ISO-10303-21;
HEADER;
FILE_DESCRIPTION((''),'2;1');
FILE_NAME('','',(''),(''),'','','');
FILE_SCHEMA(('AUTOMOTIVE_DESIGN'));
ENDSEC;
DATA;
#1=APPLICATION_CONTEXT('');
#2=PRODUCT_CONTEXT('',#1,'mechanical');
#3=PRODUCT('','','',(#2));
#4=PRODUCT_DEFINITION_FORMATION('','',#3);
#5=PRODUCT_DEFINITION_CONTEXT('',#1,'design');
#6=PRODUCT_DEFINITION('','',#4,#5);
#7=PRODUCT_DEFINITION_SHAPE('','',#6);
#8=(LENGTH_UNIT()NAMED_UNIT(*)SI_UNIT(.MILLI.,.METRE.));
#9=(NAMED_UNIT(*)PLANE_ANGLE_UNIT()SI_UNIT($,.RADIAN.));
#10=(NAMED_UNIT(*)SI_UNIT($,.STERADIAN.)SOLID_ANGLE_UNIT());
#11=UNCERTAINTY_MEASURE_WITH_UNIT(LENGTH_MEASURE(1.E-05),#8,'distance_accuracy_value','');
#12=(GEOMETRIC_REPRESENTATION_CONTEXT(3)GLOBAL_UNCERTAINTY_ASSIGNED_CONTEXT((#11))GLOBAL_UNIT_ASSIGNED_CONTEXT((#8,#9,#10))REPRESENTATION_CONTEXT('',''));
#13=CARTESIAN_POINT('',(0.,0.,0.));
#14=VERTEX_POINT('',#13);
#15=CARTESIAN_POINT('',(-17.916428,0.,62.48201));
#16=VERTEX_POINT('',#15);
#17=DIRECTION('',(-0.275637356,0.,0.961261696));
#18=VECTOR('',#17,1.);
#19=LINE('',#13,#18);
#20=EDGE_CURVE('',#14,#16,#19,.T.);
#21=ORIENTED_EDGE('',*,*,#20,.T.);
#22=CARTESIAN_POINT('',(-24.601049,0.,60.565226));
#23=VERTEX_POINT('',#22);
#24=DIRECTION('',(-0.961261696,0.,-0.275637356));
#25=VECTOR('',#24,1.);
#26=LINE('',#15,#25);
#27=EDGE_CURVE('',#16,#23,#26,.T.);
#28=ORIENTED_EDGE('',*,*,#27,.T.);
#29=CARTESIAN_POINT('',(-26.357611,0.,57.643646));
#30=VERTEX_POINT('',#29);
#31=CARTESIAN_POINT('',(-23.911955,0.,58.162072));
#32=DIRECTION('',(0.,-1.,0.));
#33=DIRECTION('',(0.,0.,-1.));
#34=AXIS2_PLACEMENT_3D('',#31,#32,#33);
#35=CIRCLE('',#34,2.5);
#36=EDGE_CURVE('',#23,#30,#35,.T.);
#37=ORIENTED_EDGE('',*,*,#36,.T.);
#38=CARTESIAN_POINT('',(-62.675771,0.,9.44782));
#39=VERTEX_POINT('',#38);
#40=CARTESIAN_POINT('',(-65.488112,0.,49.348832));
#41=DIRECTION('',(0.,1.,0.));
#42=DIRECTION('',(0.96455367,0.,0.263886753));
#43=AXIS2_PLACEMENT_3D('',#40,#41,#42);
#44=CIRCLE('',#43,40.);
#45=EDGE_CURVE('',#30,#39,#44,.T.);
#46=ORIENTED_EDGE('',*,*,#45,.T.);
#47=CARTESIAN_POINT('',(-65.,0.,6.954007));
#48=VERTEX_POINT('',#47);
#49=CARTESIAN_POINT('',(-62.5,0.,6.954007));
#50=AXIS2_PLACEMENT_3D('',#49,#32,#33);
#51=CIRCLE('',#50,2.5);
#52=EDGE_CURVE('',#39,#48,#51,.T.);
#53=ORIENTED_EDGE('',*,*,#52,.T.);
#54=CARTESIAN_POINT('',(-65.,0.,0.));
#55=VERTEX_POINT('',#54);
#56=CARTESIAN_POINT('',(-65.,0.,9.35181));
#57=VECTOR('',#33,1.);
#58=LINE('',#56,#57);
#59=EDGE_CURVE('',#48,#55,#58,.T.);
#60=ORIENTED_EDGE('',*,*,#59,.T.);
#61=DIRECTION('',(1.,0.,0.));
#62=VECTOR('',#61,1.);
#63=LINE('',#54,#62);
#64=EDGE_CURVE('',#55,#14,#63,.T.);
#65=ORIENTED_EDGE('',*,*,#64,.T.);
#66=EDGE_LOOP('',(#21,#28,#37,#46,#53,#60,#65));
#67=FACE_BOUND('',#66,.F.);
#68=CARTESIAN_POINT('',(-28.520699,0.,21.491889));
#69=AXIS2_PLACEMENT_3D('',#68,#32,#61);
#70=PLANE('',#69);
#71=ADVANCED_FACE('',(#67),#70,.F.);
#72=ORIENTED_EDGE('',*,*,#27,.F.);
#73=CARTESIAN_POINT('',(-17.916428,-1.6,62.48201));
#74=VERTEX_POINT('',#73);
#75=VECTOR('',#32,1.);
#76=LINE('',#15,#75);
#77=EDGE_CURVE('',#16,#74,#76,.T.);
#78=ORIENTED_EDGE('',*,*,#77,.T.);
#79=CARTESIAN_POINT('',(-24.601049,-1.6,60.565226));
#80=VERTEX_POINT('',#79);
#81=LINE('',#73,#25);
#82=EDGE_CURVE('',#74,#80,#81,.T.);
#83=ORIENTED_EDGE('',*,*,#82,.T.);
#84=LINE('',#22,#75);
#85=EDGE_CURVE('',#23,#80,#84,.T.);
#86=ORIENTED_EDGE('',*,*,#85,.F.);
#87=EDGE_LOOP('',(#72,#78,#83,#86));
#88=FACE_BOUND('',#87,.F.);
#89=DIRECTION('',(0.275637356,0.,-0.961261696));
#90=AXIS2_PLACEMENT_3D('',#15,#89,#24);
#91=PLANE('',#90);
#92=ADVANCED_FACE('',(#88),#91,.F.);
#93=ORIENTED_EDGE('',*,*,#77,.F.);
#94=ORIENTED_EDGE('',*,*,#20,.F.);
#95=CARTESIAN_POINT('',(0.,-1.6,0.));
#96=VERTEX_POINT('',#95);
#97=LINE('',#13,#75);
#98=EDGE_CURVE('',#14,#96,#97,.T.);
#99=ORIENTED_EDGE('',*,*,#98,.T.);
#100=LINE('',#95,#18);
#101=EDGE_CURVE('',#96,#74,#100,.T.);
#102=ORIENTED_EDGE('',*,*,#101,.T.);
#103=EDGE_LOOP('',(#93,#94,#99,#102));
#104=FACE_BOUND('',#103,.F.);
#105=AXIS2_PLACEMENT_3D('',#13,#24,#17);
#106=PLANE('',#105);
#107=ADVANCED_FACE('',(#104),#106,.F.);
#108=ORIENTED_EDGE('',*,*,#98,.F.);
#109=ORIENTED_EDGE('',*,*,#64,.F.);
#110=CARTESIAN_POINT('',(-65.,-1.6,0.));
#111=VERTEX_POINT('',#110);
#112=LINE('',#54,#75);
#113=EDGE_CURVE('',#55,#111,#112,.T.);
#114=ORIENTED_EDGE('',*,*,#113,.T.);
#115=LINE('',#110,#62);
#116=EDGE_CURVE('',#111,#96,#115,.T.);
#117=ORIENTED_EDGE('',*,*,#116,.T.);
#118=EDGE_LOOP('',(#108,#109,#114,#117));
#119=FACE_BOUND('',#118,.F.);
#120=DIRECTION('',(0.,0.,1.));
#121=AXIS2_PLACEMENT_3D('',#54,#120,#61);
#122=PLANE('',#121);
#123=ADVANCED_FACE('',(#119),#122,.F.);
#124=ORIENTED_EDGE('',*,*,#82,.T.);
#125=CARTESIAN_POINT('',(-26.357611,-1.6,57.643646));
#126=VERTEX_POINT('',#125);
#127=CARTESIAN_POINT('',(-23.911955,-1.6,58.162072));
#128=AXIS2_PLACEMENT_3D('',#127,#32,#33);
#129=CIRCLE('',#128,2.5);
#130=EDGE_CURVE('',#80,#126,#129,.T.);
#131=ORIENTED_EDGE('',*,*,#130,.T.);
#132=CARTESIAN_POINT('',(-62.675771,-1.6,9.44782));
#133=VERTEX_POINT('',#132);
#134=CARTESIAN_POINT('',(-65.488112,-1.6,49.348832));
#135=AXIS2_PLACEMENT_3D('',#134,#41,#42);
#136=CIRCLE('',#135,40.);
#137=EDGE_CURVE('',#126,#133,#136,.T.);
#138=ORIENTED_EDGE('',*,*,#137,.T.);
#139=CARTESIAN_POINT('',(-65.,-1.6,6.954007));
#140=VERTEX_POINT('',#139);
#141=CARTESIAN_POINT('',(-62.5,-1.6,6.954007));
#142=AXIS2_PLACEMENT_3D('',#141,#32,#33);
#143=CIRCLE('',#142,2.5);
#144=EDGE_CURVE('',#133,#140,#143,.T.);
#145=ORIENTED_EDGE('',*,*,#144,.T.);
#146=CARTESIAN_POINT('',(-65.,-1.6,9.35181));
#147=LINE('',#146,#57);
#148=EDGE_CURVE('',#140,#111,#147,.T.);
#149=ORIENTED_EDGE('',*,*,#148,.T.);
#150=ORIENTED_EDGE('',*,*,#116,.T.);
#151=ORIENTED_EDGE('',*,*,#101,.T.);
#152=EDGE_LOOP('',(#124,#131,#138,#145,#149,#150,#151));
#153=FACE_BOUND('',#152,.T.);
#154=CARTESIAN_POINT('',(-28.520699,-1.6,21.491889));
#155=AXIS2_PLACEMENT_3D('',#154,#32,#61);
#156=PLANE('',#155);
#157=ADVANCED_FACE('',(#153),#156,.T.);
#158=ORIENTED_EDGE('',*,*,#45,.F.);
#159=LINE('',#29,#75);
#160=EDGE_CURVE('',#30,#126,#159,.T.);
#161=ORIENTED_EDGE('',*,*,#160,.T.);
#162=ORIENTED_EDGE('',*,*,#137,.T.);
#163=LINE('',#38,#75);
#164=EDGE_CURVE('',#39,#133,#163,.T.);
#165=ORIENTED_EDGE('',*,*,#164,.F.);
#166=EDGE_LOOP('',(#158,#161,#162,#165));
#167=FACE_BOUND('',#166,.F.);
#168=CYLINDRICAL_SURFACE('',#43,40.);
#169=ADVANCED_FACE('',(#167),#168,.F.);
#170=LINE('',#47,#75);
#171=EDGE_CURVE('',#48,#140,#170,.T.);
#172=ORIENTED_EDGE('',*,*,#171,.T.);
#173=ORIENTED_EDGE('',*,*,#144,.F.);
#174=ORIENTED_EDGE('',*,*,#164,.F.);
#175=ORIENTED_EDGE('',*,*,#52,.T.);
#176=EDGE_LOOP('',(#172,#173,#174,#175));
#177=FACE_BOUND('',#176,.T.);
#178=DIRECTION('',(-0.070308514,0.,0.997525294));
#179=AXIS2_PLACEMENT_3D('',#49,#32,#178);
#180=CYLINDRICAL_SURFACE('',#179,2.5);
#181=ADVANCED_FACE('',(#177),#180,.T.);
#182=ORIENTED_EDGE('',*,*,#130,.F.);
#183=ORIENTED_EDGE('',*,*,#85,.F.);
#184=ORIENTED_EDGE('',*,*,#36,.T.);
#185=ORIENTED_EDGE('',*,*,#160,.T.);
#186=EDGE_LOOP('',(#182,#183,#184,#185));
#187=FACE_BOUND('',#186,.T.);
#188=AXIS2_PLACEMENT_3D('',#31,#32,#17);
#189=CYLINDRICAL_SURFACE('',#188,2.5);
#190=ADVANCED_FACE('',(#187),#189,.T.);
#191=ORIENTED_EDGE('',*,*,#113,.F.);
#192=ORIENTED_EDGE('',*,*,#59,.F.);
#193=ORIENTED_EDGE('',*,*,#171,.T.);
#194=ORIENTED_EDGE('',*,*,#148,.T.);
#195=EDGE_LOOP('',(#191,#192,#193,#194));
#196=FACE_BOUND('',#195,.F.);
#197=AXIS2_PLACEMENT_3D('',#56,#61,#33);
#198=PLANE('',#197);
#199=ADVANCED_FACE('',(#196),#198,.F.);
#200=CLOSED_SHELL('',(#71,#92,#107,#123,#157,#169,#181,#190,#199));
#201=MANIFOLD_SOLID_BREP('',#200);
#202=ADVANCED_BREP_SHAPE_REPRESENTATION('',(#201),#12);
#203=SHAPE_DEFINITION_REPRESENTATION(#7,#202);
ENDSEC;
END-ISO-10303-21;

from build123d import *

# Parameters (mm, degrees)
F1_DEPTH = 1.6
F2_R     = 2.5


with BuildPart() as f1:
    # F0 (on Front) → F1 (new body)
    with BuildSketch(Plane.XZ):
        with BuildLine():
            Line((-65, 0), (0, 0))
            Line((0, 0), (-17.9164281281, 62.482010236))
            Line((-17.9164281281, 62.482010236), (-26.9059650358, 59.9043020076))
            ThreePointArc((-26.9059650358, 59.9043020076), (-33.542691422, 25.2762309724), (-65, 9.3518101738))
            Line((-65, 9.3518101738), (-65, 0))
        make_face()
    extrude(amount=F1_DEPTH)

    # F2
    f2_edges = [f1.edges().sort_by_distance(p)[0] for p in [
        (-26.905965, -0.8, 59.904302),
        (-65, -0.8, 9.35181),
    ]]
    fillet(f2_edges, radius=F2_R)


solid = f1.part
